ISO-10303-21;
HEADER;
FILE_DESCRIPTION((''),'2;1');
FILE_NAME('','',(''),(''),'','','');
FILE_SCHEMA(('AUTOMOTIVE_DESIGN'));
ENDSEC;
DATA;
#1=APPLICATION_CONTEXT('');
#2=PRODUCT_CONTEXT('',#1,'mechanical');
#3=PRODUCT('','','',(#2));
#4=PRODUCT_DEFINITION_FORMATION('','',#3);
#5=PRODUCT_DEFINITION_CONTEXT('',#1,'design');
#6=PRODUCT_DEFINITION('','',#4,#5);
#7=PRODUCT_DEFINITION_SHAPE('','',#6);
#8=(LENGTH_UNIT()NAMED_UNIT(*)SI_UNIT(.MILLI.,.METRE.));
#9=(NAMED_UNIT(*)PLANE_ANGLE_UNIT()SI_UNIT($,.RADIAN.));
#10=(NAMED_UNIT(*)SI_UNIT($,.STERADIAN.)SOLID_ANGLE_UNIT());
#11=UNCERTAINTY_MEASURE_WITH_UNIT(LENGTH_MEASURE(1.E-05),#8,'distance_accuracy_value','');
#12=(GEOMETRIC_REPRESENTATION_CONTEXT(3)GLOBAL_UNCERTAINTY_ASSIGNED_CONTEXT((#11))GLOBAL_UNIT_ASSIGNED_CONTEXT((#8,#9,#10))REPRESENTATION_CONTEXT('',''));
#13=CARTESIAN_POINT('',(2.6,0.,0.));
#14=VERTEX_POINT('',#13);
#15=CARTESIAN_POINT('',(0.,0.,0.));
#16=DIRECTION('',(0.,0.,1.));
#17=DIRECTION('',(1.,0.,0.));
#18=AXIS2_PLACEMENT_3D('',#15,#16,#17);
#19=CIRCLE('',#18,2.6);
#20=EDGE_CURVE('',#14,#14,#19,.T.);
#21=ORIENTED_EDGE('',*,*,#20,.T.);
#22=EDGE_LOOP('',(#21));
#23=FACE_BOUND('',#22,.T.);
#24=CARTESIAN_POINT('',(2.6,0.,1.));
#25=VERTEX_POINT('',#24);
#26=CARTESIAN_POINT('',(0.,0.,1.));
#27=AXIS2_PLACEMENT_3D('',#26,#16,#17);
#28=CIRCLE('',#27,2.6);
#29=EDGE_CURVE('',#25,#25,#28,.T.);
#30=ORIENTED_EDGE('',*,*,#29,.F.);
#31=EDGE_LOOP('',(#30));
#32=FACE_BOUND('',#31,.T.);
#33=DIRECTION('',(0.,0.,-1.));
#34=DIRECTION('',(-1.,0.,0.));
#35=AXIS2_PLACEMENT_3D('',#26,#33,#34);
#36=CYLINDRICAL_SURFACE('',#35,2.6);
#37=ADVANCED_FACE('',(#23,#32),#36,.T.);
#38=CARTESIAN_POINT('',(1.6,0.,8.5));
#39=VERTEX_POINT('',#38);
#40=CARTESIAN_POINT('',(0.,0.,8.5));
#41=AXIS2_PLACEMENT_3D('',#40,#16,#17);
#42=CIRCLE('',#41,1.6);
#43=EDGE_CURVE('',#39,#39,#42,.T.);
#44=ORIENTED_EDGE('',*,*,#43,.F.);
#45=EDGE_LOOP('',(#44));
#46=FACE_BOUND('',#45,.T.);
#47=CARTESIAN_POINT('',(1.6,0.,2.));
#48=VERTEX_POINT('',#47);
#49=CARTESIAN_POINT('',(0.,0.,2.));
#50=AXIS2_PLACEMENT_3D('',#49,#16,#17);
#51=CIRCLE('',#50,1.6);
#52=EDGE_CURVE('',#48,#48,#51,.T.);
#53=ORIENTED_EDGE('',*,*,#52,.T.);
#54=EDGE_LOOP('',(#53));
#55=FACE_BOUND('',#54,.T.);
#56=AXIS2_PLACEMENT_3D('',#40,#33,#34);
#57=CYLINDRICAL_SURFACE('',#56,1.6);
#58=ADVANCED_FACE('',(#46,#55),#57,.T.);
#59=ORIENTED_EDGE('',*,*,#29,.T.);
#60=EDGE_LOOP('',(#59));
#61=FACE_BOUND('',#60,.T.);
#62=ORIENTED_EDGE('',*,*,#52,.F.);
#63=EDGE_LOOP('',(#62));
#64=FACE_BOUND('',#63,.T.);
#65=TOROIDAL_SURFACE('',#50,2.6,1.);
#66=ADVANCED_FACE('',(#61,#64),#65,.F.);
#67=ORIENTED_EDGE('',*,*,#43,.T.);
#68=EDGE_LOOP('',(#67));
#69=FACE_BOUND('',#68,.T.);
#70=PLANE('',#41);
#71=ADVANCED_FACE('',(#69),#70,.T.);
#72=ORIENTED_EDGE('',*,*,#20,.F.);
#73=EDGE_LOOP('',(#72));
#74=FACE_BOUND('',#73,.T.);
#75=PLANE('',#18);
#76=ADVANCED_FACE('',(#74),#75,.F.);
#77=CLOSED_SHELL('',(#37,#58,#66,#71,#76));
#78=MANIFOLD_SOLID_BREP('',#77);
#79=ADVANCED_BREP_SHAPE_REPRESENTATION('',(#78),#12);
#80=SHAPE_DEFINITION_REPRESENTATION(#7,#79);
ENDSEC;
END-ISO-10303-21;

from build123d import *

# Parameters (mm, degrees)
SKETCH_1_R      = 1.6
EXTRUDE_1_DEPTH = 8.5
SKETCH_2_R      = 2.6
EXTRUDE_2_DEPTH = 1
FILLET_1_R      = 1


with BuildPart() as part:
    # Эскиз1 → Бобышка-Вытянуть1 (new body)
    with BuildSketch(Plane.XY):
        Circle(SKETCH_1_R)
    extrude(amount=EXTRUDE_1_DEPTH)

    # Эскиз2 → Бобышка-Вытянуть2 (add)
    with BuildSketch(Plane.XY):
        Circle(SKETCH_2_R)
    extrude(amount=EXTRUDE_2_DEPTH)

    # Скругление1
    fillet_1_edges = [part.edges().sort_by_distance(p)[0] for p in [
        (-1.6, 0, 1),
    ]]
    fillet(fillet_1_edges, radius=FILLET_1_R - 0.0001)  # a hair under: the kernel refuses the full size


solid = part.part
